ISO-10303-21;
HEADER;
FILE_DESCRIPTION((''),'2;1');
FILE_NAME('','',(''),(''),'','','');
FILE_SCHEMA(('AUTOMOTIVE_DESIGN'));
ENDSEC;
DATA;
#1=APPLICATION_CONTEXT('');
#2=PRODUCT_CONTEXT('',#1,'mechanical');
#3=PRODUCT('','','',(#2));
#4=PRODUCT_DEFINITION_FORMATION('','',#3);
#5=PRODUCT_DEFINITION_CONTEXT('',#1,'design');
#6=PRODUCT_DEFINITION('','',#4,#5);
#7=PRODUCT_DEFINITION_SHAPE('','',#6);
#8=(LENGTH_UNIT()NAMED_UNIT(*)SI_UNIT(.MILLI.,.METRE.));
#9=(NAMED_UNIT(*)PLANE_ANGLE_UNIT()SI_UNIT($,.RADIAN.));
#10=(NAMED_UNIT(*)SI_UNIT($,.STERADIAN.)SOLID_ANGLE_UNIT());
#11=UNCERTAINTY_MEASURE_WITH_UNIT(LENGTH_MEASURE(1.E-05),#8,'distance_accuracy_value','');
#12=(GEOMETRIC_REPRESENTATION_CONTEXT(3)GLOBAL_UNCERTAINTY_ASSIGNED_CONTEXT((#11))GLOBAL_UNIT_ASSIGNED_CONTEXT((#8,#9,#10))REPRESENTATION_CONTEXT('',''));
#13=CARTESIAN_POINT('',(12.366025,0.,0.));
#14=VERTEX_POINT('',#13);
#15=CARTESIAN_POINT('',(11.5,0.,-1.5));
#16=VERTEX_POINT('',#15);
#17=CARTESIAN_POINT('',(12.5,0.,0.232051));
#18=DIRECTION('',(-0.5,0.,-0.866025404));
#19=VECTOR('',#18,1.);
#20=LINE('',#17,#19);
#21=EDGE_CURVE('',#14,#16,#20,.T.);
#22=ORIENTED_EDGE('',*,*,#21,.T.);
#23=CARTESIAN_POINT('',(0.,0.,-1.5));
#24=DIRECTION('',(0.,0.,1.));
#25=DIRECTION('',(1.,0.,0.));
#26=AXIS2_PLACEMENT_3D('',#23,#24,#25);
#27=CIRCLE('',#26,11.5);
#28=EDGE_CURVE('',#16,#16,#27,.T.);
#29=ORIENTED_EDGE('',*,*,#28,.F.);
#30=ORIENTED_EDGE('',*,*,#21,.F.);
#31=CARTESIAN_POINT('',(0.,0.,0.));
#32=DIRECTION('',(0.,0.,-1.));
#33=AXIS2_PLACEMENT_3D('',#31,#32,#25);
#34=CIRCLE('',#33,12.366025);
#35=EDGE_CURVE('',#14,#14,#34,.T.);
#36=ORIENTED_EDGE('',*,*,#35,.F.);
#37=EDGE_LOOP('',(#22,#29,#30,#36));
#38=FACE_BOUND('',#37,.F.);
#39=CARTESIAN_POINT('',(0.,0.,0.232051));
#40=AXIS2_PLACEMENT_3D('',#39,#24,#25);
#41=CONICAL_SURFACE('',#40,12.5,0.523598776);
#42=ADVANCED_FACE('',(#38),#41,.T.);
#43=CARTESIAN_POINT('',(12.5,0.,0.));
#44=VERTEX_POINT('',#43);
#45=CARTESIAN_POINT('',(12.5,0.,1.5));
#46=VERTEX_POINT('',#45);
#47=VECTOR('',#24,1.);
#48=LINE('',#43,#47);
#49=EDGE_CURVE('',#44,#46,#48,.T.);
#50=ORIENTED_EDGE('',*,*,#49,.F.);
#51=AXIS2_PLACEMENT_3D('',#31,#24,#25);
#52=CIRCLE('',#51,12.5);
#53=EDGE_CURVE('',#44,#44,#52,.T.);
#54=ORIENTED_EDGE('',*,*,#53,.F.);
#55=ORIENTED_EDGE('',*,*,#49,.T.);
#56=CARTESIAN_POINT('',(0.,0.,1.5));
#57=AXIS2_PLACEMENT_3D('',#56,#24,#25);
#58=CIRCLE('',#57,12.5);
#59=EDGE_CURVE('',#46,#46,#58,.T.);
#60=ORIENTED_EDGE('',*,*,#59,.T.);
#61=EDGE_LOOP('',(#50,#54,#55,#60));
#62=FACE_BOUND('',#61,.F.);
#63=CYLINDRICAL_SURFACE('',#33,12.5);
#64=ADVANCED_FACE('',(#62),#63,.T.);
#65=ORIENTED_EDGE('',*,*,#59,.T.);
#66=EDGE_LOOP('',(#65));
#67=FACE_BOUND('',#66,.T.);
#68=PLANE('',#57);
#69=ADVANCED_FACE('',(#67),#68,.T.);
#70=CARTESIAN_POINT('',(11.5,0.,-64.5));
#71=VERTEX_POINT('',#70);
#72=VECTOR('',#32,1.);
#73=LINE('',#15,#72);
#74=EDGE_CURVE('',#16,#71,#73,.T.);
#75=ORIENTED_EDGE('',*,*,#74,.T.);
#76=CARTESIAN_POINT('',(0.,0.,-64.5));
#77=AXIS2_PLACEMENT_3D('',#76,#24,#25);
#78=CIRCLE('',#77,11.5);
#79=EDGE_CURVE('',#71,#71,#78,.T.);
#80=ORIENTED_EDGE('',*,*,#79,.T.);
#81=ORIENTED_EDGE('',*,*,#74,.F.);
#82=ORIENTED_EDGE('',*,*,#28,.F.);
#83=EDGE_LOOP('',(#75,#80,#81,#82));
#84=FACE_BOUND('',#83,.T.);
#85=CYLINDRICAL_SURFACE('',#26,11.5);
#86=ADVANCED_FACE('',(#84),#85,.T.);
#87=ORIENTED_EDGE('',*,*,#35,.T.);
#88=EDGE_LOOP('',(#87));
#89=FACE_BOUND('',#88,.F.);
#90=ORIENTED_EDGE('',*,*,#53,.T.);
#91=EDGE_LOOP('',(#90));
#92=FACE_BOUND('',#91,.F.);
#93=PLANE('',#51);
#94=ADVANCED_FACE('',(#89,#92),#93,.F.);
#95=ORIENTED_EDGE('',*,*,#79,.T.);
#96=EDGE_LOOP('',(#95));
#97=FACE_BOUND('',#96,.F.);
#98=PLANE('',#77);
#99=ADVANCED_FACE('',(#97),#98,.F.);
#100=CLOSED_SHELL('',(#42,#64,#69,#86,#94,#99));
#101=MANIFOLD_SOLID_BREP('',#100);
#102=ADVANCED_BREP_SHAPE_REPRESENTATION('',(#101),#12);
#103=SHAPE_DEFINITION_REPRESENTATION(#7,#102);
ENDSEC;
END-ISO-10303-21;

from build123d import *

# Parameters (mm, degrees)
F0_R     = 12.5
F1_DEPTH = 1.5
F3_DEPTH = 1.5
F4_DEPTH = 63


# Not quite as in the source:
# - a fillet or chamfer that OpenCascade refuses, or shapes differently, is made with other operations: its cross-section is extruded or revolved along the edge and cut away or added


with BuildPart() as f1:
    # F0 (on Top) → F1 (new body)
    with BuildSketch(Plane.XY):
        Circle(F0_R)
    extrude(amount=-F1_DEPTH)

    # F2: chamfer of 1 x 1.7320508076 on 1 edges, made by hand

    # F2_s1 → F2_t2 (revolve, cut)
    with BuildSketch(Plane.XZ):
        Polygon((12.5, 0.2320508076), (11.5, -1.5), (12.5, -1.5), align=None)
    revolve(axis=Axis((0, 0, -1.5), (0, 0, 1)), mode=Mode.SUBTRACT)

    # F0 (on Top) → F3 (join)
    with BuildSketch(Plane.XY):
        Circle(F0_R)
    extrude(amount=F3_DEPTH)

    # F4 (add): a face of the model
    f4_faces = [f1.faces().sort_by_distance(p)[0] for p in [
        (0, 0, -1.5),
    ]]
    extrude(f4_faces, amount=F4_DEPTH)


solid = f1.part
